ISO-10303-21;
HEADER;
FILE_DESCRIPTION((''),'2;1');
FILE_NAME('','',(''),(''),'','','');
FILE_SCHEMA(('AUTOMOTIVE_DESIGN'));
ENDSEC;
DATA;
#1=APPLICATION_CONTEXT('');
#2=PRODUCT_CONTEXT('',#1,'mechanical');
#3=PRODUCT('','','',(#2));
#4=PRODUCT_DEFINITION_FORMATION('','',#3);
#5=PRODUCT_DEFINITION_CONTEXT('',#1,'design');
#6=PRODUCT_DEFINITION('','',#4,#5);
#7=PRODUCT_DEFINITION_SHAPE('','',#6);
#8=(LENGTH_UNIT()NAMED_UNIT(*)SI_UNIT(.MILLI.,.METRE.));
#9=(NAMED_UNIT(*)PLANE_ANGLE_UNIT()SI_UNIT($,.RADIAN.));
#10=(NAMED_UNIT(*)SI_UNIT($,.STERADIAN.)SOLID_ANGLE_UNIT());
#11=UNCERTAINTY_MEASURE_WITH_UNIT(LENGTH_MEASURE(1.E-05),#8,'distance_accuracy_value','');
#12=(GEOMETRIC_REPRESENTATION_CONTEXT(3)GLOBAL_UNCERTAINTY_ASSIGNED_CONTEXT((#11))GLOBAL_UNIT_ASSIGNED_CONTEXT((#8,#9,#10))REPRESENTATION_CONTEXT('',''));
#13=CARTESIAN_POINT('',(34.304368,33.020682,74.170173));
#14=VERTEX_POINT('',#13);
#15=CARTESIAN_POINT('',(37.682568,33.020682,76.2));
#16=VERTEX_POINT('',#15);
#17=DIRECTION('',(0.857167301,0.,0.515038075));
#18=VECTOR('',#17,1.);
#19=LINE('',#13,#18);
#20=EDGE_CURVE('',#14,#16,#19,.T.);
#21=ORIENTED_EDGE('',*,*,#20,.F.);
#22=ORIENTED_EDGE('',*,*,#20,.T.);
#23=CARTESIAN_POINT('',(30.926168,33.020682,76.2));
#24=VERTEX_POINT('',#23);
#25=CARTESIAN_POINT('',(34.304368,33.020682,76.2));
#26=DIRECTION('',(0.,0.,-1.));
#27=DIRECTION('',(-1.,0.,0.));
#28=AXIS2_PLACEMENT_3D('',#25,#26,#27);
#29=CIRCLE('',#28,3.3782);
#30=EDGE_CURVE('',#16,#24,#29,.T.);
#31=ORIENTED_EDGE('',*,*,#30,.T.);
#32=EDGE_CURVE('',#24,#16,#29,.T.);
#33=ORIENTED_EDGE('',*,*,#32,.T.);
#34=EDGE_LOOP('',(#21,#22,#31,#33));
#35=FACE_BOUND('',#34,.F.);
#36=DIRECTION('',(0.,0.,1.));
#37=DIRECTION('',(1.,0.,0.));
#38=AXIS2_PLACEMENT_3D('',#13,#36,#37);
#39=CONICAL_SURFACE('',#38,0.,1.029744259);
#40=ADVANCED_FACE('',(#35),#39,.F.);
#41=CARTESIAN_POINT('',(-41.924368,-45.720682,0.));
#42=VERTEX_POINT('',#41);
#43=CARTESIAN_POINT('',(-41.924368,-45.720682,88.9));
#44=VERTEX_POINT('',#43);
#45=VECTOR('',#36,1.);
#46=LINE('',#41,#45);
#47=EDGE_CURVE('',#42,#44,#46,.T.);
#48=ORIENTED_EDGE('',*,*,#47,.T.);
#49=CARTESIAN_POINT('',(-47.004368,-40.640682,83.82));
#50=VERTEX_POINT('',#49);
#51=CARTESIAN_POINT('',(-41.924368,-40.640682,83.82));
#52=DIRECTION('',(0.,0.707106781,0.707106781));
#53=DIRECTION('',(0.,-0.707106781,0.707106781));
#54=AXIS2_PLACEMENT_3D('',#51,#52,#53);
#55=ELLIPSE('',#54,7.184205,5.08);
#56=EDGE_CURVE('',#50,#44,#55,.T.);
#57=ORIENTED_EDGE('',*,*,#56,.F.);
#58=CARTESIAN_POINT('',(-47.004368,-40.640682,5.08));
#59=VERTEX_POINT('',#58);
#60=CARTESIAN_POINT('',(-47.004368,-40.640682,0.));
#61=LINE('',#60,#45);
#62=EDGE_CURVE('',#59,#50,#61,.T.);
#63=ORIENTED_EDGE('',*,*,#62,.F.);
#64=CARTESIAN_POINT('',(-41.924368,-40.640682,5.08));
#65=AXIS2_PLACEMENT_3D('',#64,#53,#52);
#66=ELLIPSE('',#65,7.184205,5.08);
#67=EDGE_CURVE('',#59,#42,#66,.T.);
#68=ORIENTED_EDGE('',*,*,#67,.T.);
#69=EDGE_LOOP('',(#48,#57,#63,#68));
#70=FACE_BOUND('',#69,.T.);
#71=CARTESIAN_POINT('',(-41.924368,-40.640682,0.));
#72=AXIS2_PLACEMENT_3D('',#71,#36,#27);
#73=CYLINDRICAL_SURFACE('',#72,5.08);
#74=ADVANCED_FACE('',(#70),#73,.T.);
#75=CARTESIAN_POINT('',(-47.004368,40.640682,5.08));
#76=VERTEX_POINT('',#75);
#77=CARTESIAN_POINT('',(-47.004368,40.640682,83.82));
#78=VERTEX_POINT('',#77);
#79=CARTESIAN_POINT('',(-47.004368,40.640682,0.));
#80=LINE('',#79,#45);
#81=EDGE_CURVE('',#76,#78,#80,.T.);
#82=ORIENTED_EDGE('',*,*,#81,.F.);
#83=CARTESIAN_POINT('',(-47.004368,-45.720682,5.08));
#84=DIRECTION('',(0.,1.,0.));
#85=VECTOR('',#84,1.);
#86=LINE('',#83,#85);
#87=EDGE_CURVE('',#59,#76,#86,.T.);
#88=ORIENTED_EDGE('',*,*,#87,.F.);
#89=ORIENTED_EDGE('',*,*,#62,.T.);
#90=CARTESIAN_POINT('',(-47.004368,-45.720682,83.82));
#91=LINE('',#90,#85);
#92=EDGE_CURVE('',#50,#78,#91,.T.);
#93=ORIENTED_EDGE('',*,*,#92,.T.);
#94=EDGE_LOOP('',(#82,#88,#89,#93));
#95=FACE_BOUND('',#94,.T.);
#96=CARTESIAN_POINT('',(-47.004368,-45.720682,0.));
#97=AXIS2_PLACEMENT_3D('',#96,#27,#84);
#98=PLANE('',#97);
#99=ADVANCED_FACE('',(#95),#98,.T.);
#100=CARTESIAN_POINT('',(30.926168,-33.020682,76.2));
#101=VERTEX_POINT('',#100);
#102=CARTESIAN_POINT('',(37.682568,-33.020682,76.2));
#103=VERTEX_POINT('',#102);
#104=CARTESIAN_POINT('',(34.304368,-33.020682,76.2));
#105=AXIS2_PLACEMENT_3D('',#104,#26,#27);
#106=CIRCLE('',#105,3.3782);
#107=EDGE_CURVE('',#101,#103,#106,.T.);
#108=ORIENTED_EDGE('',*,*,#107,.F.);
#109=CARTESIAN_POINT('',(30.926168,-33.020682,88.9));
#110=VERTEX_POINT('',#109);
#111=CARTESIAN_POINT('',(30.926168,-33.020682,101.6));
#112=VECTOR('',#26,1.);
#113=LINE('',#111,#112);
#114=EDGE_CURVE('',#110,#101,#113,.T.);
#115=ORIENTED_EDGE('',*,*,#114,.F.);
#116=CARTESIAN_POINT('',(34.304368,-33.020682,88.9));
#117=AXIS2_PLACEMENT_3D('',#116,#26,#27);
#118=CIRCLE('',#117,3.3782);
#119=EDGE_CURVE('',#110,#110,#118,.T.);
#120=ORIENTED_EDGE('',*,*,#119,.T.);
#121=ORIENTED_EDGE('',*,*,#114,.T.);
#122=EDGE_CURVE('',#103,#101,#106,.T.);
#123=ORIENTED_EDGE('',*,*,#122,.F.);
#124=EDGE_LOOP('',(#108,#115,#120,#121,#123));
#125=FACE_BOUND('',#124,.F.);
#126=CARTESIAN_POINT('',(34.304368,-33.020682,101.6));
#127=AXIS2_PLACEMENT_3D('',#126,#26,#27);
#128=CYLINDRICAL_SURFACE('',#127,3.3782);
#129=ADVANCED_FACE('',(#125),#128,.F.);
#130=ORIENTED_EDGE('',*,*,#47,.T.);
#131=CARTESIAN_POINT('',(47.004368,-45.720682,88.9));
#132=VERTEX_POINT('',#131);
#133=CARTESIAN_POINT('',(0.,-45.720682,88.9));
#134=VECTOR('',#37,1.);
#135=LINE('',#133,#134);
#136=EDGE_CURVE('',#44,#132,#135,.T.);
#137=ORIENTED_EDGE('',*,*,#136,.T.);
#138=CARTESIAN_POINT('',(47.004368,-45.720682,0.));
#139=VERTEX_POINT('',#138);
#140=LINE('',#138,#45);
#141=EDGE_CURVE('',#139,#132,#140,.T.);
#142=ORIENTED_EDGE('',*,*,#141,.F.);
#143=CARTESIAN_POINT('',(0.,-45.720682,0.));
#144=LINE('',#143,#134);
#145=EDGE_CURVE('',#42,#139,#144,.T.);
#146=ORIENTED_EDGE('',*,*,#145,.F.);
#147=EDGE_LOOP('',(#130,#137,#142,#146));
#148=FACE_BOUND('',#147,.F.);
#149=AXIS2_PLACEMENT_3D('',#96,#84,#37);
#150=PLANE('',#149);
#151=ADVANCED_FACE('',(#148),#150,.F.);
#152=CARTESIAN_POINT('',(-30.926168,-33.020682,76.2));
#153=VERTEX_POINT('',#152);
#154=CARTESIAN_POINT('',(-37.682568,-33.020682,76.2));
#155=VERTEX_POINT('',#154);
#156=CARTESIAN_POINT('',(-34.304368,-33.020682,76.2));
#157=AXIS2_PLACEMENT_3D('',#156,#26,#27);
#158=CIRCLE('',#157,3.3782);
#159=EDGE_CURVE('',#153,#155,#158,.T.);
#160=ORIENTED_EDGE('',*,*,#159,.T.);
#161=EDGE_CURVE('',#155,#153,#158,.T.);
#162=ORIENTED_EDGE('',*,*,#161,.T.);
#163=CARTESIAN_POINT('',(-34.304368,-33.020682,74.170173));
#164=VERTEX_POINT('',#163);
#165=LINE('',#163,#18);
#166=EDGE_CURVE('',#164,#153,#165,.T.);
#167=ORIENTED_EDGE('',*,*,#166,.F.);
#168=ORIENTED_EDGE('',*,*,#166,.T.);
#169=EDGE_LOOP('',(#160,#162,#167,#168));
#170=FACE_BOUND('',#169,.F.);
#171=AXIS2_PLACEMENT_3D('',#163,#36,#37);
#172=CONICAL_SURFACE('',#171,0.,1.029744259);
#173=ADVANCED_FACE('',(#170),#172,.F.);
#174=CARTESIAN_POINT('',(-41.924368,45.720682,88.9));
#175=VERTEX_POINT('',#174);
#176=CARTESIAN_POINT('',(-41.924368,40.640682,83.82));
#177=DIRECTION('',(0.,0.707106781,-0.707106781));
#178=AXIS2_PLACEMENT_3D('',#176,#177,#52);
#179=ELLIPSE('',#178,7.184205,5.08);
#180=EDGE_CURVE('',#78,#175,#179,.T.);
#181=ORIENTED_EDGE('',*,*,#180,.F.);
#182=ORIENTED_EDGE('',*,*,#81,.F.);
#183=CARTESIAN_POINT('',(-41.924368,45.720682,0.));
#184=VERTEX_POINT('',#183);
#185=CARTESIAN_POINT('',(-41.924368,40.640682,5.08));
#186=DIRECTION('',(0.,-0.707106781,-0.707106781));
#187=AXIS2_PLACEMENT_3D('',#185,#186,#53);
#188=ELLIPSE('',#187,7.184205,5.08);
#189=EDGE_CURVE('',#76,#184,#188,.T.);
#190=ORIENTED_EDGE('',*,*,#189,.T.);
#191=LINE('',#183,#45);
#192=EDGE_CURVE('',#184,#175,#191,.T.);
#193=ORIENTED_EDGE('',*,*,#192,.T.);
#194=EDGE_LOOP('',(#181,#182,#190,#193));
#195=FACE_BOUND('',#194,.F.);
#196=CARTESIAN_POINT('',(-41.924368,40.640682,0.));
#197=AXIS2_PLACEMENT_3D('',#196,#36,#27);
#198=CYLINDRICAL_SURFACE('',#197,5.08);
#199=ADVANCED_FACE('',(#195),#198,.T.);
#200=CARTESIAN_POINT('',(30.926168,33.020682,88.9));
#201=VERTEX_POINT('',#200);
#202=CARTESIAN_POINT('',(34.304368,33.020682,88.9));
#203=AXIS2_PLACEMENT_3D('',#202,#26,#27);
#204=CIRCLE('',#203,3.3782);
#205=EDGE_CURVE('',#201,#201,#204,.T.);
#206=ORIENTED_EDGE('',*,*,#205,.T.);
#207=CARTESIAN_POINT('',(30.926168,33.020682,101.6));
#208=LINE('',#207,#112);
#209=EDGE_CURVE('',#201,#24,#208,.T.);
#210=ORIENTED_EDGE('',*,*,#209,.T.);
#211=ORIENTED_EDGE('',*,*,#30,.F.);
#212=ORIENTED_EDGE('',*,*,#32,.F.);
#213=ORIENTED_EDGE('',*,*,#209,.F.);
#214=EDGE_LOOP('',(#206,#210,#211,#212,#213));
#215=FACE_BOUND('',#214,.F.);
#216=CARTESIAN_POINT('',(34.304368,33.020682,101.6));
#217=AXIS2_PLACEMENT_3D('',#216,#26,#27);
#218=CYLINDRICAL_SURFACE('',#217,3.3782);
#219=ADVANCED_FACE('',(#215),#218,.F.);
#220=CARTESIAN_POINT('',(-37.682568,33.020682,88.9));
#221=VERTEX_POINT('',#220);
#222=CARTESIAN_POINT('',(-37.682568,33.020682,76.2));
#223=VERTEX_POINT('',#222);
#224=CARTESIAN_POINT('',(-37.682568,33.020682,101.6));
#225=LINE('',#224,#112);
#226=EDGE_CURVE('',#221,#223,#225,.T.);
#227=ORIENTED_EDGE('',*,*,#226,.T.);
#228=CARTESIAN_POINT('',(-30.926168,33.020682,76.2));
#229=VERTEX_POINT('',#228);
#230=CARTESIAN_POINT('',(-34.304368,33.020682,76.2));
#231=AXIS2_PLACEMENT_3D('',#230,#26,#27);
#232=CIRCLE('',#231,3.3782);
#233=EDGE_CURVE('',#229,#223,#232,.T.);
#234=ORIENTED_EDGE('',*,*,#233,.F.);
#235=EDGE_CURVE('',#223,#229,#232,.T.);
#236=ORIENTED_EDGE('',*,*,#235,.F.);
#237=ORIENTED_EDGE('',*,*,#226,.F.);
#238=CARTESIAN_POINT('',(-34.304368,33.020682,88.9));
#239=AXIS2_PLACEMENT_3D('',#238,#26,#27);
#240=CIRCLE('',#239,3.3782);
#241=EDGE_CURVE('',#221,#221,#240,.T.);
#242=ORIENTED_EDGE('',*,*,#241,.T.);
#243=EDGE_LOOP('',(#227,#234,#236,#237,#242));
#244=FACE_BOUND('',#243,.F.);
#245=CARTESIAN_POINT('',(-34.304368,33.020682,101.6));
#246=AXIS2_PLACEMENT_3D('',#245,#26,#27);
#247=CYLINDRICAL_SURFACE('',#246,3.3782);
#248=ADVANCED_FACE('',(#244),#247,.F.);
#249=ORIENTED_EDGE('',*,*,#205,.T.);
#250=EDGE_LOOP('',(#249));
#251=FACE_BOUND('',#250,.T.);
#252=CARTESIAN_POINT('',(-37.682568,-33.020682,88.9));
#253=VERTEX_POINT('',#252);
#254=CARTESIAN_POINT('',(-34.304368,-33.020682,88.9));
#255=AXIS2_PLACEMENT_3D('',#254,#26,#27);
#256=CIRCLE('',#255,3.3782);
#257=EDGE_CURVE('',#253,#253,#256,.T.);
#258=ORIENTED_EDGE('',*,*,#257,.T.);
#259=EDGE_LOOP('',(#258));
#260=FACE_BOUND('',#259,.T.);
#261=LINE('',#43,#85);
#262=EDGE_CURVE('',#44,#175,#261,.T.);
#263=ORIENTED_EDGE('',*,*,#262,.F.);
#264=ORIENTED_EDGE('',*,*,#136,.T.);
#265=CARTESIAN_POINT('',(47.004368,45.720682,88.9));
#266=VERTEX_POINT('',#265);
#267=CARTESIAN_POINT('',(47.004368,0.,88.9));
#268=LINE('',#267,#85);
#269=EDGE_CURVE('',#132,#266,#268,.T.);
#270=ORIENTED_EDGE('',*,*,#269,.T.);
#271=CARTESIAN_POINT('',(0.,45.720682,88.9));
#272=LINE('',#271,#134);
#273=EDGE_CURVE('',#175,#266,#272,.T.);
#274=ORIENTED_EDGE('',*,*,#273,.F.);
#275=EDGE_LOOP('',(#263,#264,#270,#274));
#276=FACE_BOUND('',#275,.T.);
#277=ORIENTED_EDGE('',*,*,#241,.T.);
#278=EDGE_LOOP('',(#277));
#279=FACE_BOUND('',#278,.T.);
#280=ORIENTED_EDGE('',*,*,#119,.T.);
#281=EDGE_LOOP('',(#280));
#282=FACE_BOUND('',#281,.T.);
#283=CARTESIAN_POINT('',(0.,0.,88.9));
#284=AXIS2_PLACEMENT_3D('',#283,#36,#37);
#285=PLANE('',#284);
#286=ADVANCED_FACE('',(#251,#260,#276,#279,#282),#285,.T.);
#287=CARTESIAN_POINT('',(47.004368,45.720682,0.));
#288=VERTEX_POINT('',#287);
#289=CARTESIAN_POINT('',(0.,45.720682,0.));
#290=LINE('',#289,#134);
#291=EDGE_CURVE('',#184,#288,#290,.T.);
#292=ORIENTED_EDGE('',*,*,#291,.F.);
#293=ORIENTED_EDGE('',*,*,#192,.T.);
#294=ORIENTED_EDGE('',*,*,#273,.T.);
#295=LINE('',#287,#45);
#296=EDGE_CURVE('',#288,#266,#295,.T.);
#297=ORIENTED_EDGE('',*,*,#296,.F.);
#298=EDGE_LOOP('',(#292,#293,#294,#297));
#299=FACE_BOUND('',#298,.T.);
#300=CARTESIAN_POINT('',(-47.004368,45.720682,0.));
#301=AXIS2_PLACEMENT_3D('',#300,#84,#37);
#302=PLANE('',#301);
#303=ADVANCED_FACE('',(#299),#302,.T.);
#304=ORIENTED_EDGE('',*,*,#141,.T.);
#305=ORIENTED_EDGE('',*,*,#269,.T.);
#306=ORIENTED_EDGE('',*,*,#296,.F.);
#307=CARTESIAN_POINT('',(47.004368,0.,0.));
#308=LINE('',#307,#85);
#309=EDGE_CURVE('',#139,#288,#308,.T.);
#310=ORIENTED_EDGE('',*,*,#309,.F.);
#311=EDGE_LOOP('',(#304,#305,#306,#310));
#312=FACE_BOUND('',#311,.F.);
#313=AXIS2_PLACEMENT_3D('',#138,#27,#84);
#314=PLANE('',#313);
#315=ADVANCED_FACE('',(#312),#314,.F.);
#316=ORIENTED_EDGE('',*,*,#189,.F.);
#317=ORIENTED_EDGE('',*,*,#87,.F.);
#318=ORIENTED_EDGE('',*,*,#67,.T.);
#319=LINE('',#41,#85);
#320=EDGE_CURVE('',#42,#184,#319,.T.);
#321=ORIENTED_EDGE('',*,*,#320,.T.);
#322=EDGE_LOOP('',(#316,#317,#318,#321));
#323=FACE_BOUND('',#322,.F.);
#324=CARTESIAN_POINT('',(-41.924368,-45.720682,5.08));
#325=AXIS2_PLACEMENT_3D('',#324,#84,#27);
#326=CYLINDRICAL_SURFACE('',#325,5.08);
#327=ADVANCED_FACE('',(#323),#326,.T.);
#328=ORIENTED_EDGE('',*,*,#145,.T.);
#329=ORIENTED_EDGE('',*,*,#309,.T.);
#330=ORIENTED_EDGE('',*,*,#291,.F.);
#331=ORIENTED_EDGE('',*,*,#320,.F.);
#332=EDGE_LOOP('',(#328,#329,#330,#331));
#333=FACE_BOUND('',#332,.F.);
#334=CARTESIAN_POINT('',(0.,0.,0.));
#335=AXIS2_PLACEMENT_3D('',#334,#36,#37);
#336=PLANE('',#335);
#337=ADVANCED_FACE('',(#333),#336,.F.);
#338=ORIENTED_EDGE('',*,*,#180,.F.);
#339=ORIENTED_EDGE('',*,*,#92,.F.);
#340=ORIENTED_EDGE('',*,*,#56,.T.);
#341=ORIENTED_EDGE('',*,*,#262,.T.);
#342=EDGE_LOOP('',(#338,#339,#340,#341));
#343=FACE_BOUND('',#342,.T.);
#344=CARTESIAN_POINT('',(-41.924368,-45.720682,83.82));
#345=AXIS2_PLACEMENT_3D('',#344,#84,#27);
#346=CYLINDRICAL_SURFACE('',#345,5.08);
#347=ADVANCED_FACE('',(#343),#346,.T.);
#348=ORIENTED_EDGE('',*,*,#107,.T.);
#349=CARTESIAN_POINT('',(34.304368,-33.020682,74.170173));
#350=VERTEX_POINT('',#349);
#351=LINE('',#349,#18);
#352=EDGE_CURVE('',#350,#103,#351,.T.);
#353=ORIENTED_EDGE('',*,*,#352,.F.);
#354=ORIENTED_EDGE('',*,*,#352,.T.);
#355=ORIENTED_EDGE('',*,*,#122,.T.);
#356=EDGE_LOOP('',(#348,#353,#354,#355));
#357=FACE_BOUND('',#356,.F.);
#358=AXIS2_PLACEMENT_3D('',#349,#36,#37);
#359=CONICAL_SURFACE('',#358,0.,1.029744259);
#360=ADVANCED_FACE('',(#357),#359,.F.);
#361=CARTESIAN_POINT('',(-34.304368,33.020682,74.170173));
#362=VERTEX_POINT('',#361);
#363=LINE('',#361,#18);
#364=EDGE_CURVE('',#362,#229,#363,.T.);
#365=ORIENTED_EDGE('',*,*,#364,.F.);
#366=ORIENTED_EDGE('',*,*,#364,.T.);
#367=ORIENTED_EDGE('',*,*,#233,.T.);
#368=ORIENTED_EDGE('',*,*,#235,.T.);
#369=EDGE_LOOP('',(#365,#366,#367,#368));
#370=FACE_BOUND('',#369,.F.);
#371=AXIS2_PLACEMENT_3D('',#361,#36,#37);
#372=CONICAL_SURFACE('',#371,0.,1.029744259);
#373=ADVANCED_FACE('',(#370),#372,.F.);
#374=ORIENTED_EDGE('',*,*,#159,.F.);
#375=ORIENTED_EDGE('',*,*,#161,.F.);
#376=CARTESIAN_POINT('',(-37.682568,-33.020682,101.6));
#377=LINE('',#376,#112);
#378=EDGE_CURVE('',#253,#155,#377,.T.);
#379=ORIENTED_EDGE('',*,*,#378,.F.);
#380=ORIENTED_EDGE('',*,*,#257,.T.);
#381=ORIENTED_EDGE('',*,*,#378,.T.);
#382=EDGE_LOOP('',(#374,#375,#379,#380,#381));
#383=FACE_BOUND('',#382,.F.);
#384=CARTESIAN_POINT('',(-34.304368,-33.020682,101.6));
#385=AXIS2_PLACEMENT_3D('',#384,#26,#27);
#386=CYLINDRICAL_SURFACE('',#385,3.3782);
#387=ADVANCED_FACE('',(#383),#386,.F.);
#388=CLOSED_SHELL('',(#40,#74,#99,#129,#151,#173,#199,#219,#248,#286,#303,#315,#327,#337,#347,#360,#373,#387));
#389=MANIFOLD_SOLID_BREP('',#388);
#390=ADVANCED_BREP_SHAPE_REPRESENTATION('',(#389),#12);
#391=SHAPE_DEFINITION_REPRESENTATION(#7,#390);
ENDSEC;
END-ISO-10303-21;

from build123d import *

# Parameters (mm, degrees)
F0_W     = 94.0087363124
F0_H     = 91.4413630962
F1_DEPTH = 88.9
F3_D     = 6.7564
F3_DEPTH = 12.7
F3_TIP   = 2.0298273432
F6_R     = 5.08


# Not quite as in the source:
# - the program builds the solid bodies; features that only make, move or delete a surface that nothing else refers to are left out


with BuildPart() as f1:
    # F0 (on Top) → F1 (new body)
    with BuildSketch(Plane.XY):
        Rectangle(F0_W, F0_H)
    extrude(amount=F1_DEPTH)

    # F3
    with Locations(Plane.XY.offset(88.9)):
        with Locations((-34.3043681562, 33.0206815481), (34.3043681562, 33.0206815481), (34.3043681562, -33.0206815481), (-34.3043681562, -33.0206815481)):
            Hole(F3_D / 2, depth=F3_DEPTH)
            with Locations((0, 0, -(F3_DEPTH + F3_TIP / 2))):  # 118° drill point
                Cone(0, F3_D / 2, F3_TIP, mode=Mode.SUBTRACT)

    # F6
    f6_edges = [f1.edges().sort_by_distance(p)[0] for p in [
        (-47.004368, 45.720682, 44.45),
        (-47.004368, -45.720682, 44.45),
        (-47.004368, 0, 0),
        (-47.004368, 0, 88.9),
    ]]
    fillet(f6_edges, radius=F6_R)


solid = f1.part
